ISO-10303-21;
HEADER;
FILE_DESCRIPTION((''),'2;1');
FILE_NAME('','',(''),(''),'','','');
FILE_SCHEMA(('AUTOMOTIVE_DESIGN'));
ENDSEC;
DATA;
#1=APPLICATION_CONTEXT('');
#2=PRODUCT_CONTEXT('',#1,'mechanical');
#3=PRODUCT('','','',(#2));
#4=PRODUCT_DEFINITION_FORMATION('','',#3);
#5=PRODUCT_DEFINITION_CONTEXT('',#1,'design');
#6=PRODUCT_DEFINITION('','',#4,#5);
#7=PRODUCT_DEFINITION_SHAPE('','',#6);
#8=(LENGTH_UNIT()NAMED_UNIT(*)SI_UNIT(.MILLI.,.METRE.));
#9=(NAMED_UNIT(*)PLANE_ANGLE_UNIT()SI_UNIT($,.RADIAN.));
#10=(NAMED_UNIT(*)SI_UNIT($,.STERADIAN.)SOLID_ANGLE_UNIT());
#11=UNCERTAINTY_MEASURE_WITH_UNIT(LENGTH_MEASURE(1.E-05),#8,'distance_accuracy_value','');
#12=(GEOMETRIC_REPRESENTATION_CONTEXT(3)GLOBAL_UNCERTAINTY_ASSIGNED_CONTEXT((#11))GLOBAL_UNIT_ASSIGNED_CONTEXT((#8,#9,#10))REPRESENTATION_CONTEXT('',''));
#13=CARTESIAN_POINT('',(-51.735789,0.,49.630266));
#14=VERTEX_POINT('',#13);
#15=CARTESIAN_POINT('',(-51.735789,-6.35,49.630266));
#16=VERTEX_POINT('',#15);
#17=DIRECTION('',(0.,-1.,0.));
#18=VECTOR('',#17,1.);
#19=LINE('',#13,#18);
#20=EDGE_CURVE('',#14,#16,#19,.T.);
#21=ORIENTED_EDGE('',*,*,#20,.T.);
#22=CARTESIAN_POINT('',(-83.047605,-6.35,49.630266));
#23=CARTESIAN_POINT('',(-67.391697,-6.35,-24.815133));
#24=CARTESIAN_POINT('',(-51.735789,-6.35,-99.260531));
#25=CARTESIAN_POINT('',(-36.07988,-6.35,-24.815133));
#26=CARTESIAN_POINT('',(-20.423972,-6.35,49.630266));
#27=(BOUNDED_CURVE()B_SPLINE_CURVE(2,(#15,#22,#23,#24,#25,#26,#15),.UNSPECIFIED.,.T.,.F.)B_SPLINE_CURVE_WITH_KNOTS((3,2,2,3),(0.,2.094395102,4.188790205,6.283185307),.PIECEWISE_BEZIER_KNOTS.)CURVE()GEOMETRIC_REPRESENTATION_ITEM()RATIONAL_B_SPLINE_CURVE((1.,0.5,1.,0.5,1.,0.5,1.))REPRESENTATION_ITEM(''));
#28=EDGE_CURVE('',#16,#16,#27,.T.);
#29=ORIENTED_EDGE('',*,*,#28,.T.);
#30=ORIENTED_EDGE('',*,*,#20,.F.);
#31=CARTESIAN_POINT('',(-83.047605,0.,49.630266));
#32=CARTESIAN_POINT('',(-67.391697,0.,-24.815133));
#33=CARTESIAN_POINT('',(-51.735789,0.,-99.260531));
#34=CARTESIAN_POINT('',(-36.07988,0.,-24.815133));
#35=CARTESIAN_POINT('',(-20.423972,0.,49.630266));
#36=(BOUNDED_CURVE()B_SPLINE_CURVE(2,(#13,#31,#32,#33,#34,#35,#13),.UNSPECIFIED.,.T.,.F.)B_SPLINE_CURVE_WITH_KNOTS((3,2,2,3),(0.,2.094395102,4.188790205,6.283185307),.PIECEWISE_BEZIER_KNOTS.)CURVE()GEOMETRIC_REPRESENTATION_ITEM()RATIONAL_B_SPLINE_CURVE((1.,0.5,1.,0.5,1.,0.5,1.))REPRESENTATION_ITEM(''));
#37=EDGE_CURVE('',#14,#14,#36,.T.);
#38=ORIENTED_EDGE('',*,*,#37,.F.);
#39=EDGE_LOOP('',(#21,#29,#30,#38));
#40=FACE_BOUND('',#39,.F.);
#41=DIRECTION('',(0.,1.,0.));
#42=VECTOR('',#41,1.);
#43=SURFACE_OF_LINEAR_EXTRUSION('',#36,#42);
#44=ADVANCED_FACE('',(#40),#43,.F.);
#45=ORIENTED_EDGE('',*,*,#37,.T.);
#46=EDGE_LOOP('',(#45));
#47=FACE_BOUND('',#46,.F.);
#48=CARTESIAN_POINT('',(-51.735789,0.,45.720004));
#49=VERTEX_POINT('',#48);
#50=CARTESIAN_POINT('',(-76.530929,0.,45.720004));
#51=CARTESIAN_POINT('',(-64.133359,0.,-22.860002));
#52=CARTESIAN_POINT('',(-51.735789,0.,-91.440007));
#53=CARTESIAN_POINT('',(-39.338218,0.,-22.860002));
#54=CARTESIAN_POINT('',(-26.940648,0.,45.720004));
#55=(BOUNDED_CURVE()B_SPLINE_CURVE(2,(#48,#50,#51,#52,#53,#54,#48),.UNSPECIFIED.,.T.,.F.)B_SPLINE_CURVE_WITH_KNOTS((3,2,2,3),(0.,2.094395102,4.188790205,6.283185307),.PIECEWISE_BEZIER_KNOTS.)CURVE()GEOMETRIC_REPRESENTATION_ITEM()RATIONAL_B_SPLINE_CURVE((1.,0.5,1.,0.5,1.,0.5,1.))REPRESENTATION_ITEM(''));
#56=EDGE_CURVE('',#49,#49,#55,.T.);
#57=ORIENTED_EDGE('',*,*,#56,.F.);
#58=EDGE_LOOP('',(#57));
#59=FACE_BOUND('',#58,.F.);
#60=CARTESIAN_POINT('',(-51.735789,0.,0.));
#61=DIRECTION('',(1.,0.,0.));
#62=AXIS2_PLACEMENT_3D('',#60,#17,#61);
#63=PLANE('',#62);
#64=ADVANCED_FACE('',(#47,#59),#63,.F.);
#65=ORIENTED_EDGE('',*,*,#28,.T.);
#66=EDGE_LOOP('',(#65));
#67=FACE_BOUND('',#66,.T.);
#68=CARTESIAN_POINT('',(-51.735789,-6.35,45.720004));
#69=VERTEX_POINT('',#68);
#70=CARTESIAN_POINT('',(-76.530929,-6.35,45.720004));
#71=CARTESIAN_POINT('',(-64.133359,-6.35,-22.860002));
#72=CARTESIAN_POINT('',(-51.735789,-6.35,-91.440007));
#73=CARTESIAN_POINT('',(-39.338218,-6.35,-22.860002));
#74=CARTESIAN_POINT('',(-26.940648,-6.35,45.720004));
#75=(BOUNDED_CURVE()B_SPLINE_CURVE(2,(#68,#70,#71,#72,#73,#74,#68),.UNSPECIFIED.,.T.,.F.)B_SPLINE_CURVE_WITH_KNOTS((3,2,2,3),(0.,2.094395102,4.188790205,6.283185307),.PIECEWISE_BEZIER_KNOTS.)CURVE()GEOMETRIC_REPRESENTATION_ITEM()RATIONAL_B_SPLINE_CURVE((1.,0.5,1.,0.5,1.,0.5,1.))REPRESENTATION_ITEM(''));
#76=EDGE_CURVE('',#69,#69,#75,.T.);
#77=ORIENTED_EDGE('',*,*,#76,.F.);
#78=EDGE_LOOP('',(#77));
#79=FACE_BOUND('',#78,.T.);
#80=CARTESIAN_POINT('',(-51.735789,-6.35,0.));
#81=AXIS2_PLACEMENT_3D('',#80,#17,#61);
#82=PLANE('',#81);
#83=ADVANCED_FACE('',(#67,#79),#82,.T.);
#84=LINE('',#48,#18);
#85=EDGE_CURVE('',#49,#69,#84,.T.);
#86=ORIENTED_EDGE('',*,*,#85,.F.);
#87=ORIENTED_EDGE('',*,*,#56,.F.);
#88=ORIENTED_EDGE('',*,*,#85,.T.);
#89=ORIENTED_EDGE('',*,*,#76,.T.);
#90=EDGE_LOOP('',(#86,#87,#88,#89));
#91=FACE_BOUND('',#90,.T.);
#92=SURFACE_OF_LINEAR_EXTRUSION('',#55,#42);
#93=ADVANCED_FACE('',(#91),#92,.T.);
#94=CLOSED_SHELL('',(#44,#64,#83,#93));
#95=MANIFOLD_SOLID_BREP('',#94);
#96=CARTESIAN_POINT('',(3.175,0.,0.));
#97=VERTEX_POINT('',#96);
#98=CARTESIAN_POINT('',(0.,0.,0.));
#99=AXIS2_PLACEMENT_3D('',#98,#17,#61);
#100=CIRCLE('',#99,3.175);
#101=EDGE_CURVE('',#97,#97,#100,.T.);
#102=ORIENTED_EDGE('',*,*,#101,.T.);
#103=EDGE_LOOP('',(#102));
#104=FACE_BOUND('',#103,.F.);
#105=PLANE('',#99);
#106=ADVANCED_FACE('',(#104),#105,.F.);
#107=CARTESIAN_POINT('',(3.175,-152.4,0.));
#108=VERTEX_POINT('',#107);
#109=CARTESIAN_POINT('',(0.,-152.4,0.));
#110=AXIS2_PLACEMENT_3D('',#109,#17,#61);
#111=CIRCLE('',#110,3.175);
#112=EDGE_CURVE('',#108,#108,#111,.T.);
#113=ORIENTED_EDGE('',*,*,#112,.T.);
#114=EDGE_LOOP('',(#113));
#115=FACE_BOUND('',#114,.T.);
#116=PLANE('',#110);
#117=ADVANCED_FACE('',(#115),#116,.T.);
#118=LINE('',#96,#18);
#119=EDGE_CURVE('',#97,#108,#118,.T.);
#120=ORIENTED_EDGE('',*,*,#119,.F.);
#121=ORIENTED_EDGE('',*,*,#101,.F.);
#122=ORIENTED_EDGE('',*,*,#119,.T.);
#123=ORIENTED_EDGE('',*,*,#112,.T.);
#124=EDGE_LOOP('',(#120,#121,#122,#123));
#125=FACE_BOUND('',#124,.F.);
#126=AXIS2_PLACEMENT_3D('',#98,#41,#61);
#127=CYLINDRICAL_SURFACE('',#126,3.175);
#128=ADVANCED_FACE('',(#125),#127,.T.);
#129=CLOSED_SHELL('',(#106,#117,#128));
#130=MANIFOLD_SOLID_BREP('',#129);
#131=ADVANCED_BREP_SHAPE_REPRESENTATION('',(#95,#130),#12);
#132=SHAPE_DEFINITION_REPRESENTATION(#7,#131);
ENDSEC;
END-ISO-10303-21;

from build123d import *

# Parameters (mm, degrees)
F0_R     = 3.175
F1_DEPTH = 152.4
F3_DEPTH = 6.35


# Not quite as in the source:
# - a length typed as a fraction of an inch, garbled in the dataset ("3 / 203.2 mm" for 3/8 in), is restored


with BuildPart() as f1:
    # F0 (on Front) → F1 (new body)
    with BuildSketch(Plane.XZ):
        Circle(F0_R)
    extrude(amount=F1_DEPTH)


with BuildPart() as f3:
    # F2 (on Front) → F3 (new body)
    with BuildSketch(Plane.XZ):
        with BuildLine():
            add(Edge.make_bspline(
                [(-51.7357885838, 49.6302656829), (-83.0476053629, 49.6302656829), (-67.3916969734, -24.8151328415), (-51.7357885838, -99.2605313659), (-36.0798801942, -24.8151328415), (-20.4239718046, 49.6302656829), (-51.7357885838, 49.6302656829)],
                knots=[0, 0, 0, 2.0943951024, 2.0943951024, 4.1887902048, 4.1887902048, 6.2831853072, 6.2831853072, 6.2831853072], degree=2, weights=[1, 0.5, 1, 0.5, 1, 0.5, 1]))
        make_face()
        with BuildLine():
            add(Edge.make_bspline(
                [(-51.7357885838, 45.7200035453), (-76.5309288558, 45.7200035453), (-64.1333587198, -22.8600017726), (-51.7357885838, -91.4400070906), (-39.3382184477, -22.8600017726), (-26.9406483117, 45.7200035453), (-51.7357885838, 45.7200035453)],
                knots=[0, 0, 0, 2.0943951024, 2.0943951024, 4.1887902048, 4.1887902048, 6.2831853072, 6.2831853072, 6.2831853072], degree=2, weights=[1, 0.5, 1, 0.5, 1, 0.5, 1]))
        make_face(mode=Mode.SUBTRACT)
    extrude(amount=F3_DEPTH)


solid = Compound([f1.part, f3.part])
